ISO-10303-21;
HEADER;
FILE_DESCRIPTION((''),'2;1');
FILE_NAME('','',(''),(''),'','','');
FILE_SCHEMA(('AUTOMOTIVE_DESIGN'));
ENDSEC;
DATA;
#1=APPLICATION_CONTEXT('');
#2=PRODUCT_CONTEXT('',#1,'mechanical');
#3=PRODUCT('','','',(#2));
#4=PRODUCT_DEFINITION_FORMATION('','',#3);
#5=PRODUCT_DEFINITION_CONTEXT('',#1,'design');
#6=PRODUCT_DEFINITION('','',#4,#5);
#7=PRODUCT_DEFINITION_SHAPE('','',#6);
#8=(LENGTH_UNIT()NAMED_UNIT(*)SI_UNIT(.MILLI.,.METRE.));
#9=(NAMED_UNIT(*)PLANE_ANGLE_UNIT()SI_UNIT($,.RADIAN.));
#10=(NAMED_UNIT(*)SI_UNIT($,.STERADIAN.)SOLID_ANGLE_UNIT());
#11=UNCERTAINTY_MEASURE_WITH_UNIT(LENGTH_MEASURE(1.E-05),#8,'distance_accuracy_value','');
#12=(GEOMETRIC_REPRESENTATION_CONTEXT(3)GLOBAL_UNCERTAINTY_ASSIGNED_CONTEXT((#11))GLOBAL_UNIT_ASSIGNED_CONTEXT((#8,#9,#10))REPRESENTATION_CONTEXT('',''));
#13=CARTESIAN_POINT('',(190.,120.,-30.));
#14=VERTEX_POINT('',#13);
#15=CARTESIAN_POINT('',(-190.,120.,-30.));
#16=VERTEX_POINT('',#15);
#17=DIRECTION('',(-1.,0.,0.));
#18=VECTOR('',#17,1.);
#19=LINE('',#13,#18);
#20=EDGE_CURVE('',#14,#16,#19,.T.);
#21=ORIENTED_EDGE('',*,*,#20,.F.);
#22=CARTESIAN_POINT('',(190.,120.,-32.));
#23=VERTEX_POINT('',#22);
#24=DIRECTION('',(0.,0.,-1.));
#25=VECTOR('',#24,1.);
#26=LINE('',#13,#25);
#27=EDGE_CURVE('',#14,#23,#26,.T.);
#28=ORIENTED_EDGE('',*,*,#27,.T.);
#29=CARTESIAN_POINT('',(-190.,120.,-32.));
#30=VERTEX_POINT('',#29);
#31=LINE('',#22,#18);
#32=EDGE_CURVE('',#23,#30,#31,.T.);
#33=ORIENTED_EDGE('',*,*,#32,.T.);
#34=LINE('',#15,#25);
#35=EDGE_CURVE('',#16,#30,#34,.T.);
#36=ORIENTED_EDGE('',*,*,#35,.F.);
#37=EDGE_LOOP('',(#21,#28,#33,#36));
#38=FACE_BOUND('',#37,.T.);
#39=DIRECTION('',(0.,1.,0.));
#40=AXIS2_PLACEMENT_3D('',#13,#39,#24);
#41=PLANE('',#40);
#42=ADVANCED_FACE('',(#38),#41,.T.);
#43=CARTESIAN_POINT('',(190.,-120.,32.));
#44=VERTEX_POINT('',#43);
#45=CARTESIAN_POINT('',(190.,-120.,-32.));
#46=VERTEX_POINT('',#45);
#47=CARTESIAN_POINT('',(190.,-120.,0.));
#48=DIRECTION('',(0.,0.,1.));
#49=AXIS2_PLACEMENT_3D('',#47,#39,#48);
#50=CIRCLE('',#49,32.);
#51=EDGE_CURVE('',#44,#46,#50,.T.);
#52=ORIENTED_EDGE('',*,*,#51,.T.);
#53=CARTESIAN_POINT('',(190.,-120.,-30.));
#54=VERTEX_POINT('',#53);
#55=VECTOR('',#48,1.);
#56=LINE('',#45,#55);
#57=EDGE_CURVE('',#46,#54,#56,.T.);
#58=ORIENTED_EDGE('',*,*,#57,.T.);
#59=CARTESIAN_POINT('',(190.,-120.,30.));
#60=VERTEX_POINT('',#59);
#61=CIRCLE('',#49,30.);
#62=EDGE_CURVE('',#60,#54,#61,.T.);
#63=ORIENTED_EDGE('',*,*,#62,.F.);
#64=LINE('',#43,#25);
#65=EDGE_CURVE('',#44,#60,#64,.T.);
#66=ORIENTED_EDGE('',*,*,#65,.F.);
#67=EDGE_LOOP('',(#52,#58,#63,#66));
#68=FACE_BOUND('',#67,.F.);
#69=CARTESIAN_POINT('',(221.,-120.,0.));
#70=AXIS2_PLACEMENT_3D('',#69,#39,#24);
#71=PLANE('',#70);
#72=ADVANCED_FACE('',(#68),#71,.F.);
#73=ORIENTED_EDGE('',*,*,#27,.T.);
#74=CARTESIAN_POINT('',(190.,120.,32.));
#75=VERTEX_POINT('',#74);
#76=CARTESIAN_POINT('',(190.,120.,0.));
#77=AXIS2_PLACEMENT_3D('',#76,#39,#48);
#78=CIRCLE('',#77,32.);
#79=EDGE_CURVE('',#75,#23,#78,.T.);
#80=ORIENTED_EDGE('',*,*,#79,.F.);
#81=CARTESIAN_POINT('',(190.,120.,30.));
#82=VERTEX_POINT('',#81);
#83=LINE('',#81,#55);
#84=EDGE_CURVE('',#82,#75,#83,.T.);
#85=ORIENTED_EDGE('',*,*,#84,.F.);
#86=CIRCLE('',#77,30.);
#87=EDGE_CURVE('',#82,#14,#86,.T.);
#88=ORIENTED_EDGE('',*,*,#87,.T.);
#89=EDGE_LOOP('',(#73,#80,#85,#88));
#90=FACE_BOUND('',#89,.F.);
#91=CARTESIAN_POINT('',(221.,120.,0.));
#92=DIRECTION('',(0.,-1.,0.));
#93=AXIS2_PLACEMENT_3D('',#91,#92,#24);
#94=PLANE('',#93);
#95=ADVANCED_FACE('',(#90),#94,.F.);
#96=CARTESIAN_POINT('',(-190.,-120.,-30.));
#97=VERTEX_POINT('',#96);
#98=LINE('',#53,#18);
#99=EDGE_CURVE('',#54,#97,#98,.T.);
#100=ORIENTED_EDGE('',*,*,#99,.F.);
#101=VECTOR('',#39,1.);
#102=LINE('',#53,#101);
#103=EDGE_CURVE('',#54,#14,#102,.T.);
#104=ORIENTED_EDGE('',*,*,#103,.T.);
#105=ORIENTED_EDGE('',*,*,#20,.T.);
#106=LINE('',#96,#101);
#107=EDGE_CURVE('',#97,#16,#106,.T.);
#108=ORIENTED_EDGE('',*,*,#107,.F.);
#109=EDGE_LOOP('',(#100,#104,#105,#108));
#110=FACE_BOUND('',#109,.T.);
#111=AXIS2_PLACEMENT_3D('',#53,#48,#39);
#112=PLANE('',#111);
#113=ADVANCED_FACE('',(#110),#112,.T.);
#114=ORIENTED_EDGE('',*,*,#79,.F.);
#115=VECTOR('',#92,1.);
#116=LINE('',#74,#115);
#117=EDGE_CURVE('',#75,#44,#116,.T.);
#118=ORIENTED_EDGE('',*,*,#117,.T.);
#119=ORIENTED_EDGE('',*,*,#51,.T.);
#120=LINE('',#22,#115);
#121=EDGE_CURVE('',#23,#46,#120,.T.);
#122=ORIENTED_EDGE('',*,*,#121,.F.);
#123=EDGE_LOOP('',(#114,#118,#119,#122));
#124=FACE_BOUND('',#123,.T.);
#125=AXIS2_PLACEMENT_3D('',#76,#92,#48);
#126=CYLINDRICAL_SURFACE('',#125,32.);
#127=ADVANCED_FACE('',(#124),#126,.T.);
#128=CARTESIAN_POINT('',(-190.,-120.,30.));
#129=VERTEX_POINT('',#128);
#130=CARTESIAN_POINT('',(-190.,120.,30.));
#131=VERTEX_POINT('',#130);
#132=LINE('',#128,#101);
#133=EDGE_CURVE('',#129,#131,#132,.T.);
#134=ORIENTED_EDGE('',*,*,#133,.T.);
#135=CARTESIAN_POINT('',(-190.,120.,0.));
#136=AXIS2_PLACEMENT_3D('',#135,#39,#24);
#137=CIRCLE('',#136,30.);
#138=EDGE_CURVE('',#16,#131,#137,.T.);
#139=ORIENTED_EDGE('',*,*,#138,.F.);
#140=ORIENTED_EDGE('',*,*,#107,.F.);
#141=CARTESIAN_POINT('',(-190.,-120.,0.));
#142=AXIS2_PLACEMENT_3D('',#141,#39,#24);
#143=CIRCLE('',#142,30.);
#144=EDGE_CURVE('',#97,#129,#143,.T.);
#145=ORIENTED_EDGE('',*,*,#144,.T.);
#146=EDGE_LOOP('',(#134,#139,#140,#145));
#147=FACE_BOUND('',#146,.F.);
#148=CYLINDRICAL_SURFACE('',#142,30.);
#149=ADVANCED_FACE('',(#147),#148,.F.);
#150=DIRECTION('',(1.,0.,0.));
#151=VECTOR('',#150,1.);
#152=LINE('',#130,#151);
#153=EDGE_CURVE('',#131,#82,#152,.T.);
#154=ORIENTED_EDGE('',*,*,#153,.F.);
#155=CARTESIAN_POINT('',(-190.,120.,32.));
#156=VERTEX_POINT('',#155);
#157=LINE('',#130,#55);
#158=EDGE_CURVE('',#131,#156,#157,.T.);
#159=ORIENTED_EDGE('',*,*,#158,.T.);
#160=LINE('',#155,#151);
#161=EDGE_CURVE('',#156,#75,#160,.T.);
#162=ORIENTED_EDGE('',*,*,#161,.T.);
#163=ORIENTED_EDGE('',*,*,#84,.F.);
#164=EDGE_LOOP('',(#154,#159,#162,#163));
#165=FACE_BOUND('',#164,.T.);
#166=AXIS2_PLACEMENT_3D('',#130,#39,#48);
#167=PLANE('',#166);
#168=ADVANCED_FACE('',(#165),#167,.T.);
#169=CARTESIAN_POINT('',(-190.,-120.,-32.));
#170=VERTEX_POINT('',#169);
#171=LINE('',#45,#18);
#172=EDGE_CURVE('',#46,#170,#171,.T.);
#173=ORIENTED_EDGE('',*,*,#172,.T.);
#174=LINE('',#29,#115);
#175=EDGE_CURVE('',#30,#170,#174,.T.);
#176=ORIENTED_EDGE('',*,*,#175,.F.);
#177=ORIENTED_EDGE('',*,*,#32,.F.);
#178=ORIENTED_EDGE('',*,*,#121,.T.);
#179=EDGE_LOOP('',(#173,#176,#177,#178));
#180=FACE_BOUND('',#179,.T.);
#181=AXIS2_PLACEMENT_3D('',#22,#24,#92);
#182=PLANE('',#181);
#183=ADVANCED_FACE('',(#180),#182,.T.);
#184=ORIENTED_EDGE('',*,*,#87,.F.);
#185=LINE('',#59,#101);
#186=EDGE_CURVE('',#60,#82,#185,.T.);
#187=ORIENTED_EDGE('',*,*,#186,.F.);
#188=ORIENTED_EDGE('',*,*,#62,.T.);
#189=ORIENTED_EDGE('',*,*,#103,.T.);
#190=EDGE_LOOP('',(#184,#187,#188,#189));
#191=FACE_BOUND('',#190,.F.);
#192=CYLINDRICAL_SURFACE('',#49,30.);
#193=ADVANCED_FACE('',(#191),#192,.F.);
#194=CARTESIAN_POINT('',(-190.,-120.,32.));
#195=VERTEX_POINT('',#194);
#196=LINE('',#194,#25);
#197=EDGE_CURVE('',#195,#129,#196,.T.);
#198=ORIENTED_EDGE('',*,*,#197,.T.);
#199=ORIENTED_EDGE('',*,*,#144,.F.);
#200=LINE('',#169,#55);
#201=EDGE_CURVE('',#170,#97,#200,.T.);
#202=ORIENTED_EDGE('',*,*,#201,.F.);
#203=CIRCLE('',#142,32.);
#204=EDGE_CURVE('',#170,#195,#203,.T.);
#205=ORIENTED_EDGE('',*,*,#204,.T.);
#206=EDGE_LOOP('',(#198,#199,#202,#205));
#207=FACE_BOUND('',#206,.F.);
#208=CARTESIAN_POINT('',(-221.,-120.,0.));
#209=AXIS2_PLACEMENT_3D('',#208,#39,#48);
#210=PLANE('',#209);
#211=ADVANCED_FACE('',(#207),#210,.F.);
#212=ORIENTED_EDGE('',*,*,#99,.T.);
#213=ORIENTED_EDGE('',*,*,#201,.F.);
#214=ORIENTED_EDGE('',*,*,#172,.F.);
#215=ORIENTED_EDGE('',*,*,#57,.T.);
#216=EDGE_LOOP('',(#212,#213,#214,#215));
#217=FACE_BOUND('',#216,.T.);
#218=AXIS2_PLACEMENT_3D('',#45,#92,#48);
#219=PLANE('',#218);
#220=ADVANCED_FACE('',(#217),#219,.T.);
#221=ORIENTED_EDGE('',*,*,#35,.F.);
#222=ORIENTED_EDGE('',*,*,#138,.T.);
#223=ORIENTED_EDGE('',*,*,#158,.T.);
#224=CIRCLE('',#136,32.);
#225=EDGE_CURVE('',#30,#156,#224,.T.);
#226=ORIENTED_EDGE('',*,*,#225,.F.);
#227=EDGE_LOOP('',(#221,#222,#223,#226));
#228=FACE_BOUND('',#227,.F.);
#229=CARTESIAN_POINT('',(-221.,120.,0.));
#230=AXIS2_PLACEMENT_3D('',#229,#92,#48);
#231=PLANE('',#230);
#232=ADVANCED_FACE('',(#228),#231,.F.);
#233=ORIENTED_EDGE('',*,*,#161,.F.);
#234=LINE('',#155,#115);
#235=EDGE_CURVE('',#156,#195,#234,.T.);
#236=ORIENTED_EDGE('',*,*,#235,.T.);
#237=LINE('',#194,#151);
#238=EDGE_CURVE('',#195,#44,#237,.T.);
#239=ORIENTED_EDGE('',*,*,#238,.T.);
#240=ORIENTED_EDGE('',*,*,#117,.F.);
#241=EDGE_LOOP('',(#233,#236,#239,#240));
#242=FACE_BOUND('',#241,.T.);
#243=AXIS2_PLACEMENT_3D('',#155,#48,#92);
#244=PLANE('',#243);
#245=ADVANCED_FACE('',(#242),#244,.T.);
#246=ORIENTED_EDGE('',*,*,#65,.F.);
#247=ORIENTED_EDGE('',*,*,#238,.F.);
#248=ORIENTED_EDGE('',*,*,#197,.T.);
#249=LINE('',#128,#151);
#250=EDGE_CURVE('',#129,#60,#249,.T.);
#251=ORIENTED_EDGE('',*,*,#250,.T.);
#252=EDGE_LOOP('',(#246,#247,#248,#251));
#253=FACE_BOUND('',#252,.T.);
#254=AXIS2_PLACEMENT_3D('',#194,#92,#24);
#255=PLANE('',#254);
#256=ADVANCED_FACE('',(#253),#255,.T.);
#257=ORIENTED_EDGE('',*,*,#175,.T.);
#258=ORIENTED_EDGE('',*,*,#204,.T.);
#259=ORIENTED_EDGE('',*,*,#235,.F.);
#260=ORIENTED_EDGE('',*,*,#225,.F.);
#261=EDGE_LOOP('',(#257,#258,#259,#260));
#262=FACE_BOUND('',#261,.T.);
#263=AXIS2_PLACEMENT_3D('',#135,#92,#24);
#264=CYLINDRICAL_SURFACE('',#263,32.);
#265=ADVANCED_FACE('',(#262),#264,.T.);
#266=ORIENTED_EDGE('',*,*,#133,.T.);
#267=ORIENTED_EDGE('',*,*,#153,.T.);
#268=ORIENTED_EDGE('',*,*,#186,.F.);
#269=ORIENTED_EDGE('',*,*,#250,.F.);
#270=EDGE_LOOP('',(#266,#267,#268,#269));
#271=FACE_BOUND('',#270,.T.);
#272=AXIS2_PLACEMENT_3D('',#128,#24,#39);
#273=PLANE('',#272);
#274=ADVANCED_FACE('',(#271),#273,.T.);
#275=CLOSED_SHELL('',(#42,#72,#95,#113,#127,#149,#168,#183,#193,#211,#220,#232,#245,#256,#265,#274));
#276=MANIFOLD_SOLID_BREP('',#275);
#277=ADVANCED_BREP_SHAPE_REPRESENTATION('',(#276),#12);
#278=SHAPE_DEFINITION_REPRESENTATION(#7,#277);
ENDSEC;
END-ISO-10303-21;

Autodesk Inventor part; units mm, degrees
ref_plane "YZ Plane" through (0, 0, 0) normal (1, 0, 0) x (0, 1, 0)
ref_plane "XZ Plane" through (0, 0, 0) normal (0, 1, 0) x (-1, 0, 0)
sketch "Sketch1" plane through (0, 0, 0) normal (0, 1, 0) x (-1, 0, 0)
  line L0 (-220, 0) -> (220, 0) construction
  line L1 (-190, -30) -> (190, -30)
  line L2 (190, 30) -> (-190, 30)
  arc A0 (-190, 30) -> (-190, -30) centre (-190, 0) ccw
  arc A1 (190, -30) -> (190, 30) centre (190, 0) ccw
  point P0 (0, 0)
  point P1 (0, 0)
  dimension "d0" = 380
  dimension "d1" = 60
ref_plane "Work Plane1" through (220, 0, 0) normal (0, 0, -1) x (-1, 0, 0)
sketch "Sketch2" plane through (220, 0, 0) normal (0, 0, -1) x (-1, 0, 0)
  line L0 (0, 120) -> (-2, 120)
  line L1 (-2, 120) -> (-2, -120)
  line L2 (-2, -120) -> (0, -120)
  line L3 (0, -120) -> (0, 120)
  line L4 (0, 120) -> (-2, -120) construction
  line L5 (-2, 120) -> (0, -120) construction
  point P0 (220, 0)
  point P1 (-1, 0)
  point P2 (-1, -120)
  point P3 (-1, 120)
  point P4 (0, 0)
  point P5 (-2, 0)
  point P6 (0, 0)
  dimension "d2" = 240
  dimension "d3" = 2
sweep "Sweep1" add profiles "Sketch2" path "Sketch1"
properties part number "HCMUTE-CDT23-BELT_PHAN_LOAI" material "PVC, Unplasticized"
